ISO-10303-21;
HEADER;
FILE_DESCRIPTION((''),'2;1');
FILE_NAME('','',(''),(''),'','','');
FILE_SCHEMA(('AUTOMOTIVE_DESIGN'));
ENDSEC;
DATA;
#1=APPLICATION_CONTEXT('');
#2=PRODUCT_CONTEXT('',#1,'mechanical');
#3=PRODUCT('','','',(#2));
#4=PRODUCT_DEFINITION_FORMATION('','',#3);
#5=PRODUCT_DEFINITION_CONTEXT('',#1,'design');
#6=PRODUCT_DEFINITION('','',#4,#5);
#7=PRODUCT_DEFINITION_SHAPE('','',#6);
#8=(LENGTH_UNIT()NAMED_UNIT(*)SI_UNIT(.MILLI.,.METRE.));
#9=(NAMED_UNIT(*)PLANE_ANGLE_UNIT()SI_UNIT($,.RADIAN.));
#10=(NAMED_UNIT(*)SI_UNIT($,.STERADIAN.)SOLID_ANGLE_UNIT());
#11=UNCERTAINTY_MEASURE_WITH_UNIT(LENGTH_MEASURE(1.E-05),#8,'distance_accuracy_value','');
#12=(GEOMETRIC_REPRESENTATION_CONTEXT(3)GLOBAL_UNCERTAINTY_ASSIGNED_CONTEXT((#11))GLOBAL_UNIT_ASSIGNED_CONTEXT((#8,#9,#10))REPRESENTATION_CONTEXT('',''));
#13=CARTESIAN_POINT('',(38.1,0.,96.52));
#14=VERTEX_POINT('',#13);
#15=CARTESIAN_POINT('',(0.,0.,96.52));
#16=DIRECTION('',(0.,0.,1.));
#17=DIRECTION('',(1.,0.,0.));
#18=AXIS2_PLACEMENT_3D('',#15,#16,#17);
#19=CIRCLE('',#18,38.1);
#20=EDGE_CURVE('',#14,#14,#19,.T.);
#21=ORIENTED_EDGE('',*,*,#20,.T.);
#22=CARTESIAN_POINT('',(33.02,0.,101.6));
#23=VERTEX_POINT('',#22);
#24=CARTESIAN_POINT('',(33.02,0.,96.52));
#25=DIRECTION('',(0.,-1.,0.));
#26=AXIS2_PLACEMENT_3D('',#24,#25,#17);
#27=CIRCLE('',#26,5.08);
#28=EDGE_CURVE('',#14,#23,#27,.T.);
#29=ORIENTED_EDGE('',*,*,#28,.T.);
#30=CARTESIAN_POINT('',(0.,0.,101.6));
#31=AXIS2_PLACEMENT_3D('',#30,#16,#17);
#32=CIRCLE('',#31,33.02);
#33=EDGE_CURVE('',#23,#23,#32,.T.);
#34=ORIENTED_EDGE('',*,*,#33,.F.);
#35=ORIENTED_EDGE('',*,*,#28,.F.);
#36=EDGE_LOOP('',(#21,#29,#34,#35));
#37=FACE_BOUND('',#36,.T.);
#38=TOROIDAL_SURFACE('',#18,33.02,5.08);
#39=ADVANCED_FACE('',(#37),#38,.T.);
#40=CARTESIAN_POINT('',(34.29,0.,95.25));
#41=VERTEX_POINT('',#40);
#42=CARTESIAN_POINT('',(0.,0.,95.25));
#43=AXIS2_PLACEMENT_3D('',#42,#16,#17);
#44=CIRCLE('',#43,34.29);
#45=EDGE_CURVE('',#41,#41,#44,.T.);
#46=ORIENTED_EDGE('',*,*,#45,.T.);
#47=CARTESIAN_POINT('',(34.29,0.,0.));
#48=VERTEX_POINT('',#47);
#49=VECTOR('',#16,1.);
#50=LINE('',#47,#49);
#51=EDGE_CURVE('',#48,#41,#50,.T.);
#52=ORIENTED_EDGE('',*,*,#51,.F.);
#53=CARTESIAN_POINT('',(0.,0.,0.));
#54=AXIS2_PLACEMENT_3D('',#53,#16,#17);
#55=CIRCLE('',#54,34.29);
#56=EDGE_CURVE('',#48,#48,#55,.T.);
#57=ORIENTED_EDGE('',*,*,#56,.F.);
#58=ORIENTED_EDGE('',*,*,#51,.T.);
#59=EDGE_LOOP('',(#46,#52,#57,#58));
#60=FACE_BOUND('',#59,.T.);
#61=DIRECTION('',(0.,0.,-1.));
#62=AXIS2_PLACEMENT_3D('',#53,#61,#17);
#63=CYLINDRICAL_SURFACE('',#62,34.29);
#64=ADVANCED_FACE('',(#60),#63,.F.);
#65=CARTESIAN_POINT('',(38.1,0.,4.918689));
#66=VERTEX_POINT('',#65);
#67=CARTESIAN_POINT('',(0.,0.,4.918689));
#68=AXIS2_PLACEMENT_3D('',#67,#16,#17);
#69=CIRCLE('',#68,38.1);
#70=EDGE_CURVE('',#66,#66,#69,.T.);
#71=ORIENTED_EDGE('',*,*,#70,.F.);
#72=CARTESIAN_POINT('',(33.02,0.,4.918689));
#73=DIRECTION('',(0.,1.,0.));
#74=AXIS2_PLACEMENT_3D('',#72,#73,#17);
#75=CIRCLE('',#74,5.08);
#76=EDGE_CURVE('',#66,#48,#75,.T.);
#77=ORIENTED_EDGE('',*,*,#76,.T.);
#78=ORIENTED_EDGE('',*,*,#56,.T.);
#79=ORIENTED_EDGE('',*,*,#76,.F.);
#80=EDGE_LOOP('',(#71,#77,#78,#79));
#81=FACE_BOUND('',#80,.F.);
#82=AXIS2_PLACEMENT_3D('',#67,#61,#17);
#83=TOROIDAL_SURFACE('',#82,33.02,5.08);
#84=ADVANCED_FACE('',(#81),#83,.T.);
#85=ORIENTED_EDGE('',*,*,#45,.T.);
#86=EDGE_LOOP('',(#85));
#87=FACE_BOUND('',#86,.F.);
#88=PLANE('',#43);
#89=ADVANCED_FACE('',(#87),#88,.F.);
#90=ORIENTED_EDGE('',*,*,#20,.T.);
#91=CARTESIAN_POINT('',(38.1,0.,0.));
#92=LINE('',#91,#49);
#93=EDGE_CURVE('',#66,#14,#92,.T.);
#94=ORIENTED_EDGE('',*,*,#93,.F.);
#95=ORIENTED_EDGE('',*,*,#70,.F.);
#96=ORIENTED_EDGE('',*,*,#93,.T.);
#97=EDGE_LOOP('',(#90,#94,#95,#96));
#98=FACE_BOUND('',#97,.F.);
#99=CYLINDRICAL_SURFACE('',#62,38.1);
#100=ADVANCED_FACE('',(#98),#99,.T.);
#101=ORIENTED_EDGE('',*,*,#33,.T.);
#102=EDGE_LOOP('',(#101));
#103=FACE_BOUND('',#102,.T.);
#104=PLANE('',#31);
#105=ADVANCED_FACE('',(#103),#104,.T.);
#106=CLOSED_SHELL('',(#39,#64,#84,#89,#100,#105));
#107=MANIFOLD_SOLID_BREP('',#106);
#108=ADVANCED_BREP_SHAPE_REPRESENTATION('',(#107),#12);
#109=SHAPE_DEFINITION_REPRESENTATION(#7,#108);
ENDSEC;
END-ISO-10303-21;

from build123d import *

# Parameters (mm, degrees)
F0_R     = 38.1
F1_DEPTH = 101.6
F2_R     = 34.29
F3_DEPTH = 95.25


# Not quite as in the source:
# - a fillet or chamfer that OpenCascade refuses, or shapes differently, is made with other operations: its cross-section is extruded or revolved along the edge and cut away or added


with BuildPart() as f1:
    # F0 (on Top) → F1 (new body)
    with BuildSketch(Plane.XY):
        Circle(F0_R)
    extrude(amount=F1_DEPTH)

    # F2 (on Top) → F3 (cut)
    with BuildSketch(Plane.XY):
        Circle(F2_R)
    extrude(amount=F3_DEPTH, mode=Mode.SUBTRACT)

    # F4: fillet of radius 5.08 on 2 edges, made by hand

    # F4_s1 → F4_t2 (revolve, cut)
    with BuildSketch(Plane.XZ):
        with BuildLine():
            ThreePointArc((38.1, 4.9186888497), (37.0360926284, 1.8078368763), (34.29, 0))
            Line((34.29, 0), (38.1, 0))
            Line((38.1, 0), (38.1, 4.9186888497))
        make_face()
    revolve(axis=Axis((0, 0, 0), (0, 0, 1)), mode=Mode.SUBTRACT)

    # F4_s3 → F4_t4 (revolve, cut)
    with BuildSketch(Plane.XZ):
        with BuildLine():
            ThreePointArc((38.1, 96.52), (36.6121024484, 100.1121024484), (33.02, 101.6))
            Line((33.02, 101.6), (38.1, 101.6))
            Line((38.1, 101.6), (38.1, 96.52))
        make_face()
    revolve(axis=Axis((0, 0, 101.6), (0, 0, 1)), mode=Mode.SUBTRACT)


solid = f1.part
